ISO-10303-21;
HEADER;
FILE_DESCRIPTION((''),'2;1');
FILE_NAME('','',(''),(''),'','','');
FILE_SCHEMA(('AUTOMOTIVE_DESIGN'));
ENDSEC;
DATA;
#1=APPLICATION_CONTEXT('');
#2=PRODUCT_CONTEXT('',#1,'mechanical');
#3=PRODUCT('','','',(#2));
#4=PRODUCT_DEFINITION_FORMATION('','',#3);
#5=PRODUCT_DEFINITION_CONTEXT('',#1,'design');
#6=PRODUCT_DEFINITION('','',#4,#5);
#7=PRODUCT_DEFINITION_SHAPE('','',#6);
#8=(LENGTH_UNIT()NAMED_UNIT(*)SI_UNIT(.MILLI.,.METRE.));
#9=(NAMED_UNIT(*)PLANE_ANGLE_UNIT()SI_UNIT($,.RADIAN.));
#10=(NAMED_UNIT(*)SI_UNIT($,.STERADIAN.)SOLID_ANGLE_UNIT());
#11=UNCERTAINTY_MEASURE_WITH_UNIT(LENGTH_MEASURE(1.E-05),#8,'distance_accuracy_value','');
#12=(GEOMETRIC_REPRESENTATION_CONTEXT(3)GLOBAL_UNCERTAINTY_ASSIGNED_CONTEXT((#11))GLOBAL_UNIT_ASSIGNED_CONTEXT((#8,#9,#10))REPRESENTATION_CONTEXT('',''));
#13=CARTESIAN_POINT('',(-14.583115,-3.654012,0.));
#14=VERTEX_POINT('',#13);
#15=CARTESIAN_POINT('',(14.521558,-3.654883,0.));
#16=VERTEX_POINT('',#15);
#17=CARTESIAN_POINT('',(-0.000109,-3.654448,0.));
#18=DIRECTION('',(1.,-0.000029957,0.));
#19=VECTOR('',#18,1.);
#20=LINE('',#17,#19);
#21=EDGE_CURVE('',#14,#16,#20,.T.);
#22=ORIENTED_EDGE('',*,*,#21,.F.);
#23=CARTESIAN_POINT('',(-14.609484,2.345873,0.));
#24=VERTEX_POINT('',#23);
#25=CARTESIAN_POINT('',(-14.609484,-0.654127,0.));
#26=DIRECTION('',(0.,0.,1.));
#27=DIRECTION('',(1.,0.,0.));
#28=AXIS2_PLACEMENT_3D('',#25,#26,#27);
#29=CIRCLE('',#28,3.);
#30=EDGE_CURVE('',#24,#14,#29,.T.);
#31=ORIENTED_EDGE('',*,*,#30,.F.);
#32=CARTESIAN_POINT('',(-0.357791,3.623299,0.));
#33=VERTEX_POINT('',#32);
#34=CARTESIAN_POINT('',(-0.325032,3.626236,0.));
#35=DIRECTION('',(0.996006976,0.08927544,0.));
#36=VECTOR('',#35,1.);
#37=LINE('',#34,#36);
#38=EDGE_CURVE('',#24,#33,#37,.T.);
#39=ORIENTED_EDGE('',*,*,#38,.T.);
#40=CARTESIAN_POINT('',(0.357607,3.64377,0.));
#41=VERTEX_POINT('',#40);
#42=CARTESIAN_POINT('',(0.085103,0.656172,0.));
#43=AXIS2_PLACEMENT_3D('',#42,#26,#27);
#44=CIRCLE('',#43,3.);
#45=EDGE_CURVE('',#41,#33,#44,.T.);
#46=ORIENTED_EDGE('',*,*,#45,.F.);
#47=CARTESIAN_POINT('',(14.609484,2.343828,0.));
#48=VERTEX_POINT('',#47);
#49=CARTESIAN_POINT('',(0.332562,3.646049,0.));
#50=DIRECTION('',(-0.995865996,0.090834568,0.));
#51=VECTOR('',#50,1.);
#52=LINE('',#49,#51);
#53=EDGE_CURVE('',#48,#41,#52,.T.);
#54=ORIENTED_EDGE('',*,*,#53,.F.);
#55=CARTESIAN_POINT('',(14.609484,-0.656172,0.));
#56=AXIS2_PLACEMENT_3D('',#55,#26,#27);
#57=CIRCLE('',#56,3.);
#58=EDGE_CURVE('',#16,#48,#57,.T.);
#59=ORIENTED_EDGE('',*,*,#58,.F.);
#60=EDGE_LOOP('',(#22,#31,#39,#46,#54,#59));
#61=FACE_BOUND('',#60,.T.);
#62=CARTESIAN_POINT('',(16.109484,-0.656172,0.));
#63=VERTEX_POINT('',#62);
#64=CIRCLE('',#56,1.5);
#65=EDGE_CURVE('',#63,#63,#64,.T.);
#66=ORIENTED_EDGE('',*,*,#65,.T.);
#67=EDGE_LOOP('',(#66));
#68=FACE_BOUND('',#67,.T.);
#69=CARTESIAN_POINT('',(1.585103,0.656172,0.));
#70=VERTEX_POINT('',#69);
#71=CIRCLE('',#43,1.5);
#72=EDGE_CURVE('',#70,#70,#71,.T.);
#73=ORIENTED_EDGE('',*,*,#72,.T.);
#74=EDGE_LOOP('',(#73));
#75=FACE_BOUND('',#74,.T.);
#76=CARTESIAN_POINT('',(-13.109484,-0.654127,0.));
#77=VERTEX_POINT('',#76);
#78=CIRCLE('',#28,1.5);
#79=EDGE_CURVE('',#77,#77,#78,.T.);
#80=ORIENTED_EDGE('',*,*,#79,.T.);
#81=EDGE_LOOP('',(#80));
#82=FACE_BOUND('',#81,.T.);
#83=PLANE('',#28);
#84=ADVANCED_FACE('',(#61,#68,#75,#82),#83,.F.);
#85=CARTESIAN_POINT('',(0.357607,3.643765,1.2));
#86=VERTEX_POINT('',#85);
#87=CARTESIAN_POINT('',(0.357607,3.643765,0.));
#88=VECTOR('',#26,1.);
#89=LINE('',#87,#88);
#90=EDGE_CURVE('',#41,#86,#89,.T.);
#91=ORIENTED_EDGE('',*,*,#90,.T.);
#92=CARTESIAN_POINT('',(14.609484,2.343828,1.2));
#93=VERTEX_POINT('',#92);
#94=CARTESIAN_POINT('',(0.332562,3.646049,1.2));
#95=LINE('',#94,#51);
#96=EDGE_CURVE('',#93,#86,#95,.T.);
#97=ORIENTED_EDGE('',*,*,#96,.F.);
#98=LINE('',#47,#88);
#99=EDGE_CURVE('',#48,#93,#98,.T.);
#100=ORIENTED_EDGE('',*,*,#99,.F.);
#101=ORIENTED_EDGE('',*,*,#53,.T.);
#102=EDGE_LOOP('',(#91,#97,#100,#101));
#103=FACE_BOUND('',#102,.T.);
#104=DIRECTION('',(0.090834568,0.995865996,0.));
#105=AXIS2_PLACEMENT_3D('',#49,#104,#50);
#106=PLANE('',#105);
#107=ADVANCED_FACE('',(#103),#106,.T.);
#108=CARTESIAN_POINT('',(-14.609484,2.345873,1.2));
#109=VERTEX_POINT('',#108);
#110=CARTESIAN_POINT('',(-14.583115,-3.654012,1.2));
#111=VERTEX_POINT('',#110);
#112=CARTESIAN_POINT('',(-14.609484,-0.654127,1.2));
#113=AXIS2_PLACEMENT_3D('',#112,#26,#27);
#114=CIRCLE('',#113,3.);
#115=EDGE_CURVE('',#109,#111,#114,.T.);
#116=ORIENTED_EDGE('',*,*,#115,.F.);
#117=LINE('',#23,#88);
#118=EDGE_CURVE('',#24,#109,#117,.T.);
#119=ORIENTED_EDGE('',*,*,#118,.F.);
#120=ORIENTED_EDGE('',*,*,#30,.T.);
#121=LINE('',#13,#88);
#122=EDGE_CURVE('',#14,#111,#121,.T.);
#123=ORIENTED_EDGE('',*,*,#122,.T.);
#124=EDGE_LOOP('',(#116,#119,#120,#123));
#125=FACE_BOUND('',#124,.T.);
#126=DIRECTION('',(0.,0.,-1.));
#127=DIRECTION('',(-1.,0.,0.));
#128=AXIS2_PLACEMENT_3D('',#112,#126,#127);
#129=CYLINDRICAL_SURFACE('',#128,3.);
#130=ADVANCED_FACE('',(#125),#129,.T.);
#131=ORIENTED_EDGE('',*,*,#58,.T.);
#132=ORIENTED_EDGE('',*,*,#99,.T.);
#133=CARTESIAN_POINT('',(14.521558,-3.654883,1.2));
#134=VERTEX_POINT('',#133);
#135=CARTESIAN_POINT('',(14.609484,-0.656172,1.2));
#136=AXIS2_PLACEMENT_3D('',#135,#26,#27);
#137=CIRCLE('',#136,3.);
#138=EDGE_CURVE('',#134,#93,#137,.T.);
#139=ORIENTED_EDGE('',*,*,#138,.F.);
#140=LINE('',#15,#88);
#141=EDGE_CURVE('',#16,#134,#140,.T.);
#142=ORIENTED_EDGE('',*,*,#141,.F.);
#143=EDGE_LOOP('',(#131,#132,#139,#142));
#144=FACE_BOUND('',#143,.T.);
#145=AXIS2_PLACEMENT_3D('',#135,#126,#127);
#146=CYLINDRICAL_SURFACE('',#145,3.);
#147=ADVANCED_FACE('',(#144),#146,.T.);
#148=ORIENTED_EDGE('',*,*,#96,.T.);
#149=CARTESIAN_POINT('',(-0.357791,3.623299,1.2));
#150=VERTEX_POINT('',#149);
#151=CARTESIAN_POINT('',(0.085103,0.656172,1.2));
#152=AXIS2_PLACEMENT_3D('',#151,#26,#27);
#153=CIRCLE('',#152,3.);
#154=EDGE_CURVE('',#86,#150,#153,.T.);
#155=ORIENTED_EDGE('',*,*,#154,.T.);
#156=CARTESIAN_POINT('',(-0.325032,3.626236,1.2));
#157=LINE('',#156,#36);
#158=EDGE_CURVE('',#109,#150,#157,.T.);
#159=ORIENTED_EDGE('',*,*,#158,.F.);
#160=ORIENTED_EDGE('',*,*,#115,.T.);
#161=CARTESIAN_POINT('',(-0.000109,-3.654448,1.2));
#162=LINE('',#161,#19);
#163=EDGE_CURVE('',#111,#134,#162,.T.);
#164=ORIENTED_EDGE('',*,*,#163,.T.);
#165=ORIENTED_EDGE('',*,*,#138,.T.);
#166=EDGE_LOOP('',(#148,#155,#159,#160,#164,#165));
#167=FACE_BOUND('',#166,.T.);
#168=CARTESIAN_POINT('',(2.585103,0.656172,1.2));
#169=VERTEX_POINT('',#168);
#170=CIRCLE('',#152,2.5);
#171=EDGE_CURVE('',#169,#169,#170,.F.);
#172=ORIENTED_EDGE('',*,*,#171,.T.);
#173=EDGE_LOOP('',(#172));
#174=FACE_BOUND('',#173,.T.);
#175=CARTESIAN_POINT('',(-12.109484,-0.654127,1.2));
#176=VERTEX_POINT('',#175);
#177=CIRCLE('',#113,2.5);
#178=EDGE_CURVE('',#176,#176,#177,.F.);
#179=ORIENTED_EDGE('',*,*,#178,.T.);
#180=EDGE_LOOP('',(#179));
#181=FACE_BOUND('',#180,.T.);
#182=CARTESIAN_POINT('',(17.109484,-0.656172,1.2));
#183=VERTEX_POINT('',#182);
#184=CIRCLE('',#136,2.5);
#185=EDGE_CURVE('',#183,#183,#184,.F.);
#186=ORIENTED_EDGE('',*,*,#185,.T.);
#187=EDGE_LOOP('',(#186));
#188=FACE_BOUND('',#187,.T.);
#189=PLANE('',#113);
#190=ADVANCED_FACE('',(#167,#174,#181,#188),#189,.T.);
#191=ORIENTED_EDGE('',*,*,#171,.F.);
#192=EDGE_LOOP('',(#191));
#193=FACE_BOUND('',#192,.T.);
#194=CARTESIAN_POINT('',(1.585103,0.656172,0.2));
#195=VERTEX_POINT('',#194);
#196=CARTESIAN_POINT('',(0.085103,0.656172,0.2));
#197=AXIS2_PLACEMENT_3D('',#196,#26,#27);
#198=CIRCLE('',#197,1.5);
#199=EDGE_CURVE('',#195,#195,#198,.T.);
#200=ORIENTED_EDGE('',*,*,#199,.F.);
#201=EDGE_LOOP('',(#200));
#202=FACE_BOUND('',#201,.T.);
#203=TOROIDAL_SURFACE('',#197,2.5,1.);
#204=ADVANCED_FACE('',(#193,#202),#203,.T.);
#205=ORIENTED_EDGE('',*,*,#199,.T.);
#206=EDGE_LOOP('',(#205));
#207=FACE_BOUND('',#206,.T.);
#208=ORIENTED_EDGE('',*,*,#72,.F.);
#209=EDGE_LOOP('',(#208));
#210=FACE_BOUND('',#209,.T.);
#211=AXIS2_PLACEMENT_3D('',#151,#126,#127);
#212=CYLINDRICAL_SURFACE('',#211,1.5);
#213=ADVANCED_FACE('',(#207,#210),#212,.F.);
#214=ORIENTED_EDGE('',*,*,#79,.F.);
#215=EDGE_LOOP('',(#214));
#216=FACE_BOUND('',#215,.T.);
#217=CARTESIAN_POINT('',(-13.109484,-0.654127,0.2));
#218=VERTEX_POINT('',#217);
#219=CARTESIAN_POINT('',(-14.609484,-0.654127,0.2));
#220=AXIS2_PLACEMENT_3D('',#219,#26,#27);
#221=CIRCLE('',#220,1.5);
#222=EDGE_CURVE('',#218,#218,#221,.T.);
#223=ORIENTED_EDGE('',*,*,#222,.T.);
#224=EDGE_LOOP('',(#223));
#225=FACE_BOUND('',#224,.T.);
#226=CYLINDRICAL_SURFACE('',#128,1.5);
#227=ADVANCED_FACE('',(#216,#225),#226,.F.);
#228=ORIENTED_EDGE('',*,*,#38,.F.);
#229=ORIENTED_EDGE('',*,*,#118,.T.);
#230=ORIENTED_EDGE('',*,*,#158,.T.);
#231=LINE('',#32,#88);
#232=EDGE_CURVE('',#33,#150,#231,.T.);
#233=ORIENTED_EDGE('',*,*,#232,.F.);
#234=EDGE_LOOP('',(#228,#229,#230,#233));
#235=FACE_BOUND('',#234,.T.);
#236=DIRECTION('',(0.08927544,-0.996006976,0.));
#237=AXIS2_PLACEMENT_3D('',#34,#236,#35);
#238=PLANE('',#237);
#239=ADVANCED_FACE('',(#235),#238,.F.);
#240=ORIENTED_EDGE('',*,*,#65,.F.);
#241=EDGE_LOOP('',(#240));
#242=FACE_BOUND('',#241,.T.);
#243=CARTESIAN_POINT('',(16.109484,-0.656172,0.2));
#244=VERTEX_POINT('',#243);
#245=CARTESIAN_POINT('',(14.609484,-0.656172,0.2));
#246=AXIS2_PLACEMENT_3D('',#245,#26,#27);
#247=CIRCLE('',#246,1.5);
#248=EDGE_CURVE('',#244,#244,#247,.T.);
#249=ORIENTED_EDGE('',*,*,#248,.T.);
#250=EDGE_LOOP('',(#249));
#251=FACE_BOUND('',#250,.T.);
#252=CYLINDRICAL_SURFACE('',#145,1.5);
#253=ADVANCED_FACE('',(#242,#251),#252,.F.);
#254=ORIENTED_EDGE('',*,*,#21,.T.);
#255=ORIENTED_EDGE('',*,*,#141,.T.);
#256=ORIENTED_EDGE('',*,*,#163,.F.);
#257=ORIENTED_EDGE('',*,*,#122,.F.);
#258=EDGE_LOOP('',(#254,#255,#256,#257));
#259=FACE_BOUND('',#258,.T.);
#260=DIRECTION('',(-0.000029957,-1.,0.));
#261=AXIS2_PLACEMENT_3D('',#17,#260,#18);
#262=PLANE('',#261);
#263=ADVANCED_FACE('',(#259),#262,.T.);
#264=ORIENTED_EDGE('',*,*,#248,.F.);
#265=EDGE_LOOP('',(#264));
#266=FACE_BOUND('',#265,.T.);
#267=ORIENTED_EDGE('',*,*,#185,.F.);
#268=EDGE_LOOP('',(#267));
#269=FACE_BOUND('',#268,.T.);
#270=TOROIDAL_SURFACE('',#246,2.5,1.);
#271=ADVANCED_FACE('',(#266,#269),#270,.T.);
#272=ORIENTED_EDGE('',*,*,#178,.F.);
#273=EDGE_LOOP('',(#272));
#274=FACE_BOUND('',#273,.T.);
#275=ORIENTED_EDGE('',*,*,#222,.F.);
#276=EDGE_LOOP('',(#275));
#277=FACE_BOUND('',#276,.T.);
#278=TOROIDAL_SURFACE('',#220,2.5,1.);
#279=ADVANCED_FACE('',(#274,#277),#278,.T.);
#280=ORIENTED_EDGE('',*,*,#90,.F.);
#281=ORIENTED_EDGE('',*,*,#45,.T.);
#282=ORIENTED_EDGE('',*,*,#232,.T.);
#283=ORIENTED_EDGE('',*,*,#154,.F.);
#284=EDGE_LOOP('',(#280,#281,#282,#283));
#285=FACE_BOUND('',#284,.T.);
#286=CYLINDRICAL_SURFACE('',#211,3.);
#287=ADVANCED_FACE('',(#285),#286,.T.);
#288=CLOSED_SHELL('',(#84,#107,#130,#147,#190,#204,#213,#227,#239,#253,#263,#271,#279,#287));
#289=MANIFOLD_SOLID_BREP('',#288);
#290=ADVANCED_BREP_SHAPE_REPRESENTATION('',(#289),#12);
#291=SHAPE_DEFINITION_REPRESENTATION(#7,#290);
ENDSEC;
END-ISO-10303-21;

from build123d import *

# Parameters (mm, degrees)
SKETCH_1_R        = 3
SKETCH_1_R_2      = 1.5
EXTRUDE_1_DEPTH   = 1.2
EXTRUDE_1_2_DEPTH = 1.2
EXTRUDE_1_3_DEPTH = 1.2
EXTRUDE_START     = -1.2
EXTRUDE_6_DEPTH   = 1.2
FILLET_1_R        = 1


# Read off the part's stored shape, not the designer's step: Бобышка-Вытянуть6
with BuildPart() as part:
    # Эскиз1 → Бобышка-Вытянуть1 (new body)
    with BuildSketch(Plane.XY):
        with Locations((-14.609483562, -0.654127434)):
            Circle(SKETCH_1_R)
        with Locations((-14.609483562, -0.654127434)):
            Circle(SKETCH_1_R_2, mode=Mode.SUBTRACT)
    extrude(amount=EXTRUDE_1_DEPTH)



with BuildPart() as body_2:
    # Эскиз1 → Extrude 1 2 (new body)
    with BuildSketch(Plane.XY):
        with Locations((0.085103447, 0.656172203)):
            Circle(SKETCH_1_R)
        with Locations((0.085103447, 0.656172203)):
            Circle(SKETCH_1_R_2, mode=Mode.SUBTRACT)
    extrude(amount=EXTRUDE_1_2_DEPTH)


with BuildPart() as body_3:
    # Эскиз1 → Extrude 1 3 (new body)
    with BuildSketch(Plane.XY):
        with Locations((14.609483562, -0.656172203)):
            Circle(SKETCH_1_R)
        with Locations((14.609483562, -0.656172203)):
            Circle(SKETCH_1_R_2, mode=Mode.SUBTRACT)
    extrude(amount=EXTRUDE_1_3_DEPTH)


with BuildPart() as part_1:
    add(part.part)

    add(body_2.part)  # Бобышка-Вытянуть6 merges body 2

    add(body_3.part)  # Бобышка-Вытянуть6 merges body 3
    # Бобышка-Вытянуть6 outline → Бобышка-Вытянуть6 (add)
    with BuildSketch(Plane.XY.offset(1.2).offset(EXTRUDE_START)):
        with BuildLine():
            Line((-0.357791462, 3.62329945), (-14.609483562, 2.345872566))
            ThreePointArc((-14.609483562, 2.345872566), (-11.609512533, -0.640943153), (-14.583115254, -3.65401155))
            Line((-14.583115254, -3.65401155), (14.52155751, -3.654883428))
            ThreePointArc((14.52155751, -3.654883428), (11.609805773, -0.612204455), (14.609483562, 2.343827797))
            Line((14.609483562, 2.343827797), (0.357607149, 3.64377019))
            ThreePointArc((0.357607149, 3.64377019), (0.170911685, -2.34260037), (-0.357791462, 3.62329945))
        make_face()
    extrude(amount=EXTRUDE_6_DEPTH)

    # Скругление1
    fillet_1_edges = [part_1.edges().sort_by_distance(p)[0] for p in [
        (-1.414896553, 0.656172203, 1.2),
        (13.109483562, -0.656172203, 1.2),
        (-16.109483562, -0.654127434, 1.2),
    ]]
    fillet(fillet_1_edges, radius=FILLET_1_R)


solid = part_1.part
